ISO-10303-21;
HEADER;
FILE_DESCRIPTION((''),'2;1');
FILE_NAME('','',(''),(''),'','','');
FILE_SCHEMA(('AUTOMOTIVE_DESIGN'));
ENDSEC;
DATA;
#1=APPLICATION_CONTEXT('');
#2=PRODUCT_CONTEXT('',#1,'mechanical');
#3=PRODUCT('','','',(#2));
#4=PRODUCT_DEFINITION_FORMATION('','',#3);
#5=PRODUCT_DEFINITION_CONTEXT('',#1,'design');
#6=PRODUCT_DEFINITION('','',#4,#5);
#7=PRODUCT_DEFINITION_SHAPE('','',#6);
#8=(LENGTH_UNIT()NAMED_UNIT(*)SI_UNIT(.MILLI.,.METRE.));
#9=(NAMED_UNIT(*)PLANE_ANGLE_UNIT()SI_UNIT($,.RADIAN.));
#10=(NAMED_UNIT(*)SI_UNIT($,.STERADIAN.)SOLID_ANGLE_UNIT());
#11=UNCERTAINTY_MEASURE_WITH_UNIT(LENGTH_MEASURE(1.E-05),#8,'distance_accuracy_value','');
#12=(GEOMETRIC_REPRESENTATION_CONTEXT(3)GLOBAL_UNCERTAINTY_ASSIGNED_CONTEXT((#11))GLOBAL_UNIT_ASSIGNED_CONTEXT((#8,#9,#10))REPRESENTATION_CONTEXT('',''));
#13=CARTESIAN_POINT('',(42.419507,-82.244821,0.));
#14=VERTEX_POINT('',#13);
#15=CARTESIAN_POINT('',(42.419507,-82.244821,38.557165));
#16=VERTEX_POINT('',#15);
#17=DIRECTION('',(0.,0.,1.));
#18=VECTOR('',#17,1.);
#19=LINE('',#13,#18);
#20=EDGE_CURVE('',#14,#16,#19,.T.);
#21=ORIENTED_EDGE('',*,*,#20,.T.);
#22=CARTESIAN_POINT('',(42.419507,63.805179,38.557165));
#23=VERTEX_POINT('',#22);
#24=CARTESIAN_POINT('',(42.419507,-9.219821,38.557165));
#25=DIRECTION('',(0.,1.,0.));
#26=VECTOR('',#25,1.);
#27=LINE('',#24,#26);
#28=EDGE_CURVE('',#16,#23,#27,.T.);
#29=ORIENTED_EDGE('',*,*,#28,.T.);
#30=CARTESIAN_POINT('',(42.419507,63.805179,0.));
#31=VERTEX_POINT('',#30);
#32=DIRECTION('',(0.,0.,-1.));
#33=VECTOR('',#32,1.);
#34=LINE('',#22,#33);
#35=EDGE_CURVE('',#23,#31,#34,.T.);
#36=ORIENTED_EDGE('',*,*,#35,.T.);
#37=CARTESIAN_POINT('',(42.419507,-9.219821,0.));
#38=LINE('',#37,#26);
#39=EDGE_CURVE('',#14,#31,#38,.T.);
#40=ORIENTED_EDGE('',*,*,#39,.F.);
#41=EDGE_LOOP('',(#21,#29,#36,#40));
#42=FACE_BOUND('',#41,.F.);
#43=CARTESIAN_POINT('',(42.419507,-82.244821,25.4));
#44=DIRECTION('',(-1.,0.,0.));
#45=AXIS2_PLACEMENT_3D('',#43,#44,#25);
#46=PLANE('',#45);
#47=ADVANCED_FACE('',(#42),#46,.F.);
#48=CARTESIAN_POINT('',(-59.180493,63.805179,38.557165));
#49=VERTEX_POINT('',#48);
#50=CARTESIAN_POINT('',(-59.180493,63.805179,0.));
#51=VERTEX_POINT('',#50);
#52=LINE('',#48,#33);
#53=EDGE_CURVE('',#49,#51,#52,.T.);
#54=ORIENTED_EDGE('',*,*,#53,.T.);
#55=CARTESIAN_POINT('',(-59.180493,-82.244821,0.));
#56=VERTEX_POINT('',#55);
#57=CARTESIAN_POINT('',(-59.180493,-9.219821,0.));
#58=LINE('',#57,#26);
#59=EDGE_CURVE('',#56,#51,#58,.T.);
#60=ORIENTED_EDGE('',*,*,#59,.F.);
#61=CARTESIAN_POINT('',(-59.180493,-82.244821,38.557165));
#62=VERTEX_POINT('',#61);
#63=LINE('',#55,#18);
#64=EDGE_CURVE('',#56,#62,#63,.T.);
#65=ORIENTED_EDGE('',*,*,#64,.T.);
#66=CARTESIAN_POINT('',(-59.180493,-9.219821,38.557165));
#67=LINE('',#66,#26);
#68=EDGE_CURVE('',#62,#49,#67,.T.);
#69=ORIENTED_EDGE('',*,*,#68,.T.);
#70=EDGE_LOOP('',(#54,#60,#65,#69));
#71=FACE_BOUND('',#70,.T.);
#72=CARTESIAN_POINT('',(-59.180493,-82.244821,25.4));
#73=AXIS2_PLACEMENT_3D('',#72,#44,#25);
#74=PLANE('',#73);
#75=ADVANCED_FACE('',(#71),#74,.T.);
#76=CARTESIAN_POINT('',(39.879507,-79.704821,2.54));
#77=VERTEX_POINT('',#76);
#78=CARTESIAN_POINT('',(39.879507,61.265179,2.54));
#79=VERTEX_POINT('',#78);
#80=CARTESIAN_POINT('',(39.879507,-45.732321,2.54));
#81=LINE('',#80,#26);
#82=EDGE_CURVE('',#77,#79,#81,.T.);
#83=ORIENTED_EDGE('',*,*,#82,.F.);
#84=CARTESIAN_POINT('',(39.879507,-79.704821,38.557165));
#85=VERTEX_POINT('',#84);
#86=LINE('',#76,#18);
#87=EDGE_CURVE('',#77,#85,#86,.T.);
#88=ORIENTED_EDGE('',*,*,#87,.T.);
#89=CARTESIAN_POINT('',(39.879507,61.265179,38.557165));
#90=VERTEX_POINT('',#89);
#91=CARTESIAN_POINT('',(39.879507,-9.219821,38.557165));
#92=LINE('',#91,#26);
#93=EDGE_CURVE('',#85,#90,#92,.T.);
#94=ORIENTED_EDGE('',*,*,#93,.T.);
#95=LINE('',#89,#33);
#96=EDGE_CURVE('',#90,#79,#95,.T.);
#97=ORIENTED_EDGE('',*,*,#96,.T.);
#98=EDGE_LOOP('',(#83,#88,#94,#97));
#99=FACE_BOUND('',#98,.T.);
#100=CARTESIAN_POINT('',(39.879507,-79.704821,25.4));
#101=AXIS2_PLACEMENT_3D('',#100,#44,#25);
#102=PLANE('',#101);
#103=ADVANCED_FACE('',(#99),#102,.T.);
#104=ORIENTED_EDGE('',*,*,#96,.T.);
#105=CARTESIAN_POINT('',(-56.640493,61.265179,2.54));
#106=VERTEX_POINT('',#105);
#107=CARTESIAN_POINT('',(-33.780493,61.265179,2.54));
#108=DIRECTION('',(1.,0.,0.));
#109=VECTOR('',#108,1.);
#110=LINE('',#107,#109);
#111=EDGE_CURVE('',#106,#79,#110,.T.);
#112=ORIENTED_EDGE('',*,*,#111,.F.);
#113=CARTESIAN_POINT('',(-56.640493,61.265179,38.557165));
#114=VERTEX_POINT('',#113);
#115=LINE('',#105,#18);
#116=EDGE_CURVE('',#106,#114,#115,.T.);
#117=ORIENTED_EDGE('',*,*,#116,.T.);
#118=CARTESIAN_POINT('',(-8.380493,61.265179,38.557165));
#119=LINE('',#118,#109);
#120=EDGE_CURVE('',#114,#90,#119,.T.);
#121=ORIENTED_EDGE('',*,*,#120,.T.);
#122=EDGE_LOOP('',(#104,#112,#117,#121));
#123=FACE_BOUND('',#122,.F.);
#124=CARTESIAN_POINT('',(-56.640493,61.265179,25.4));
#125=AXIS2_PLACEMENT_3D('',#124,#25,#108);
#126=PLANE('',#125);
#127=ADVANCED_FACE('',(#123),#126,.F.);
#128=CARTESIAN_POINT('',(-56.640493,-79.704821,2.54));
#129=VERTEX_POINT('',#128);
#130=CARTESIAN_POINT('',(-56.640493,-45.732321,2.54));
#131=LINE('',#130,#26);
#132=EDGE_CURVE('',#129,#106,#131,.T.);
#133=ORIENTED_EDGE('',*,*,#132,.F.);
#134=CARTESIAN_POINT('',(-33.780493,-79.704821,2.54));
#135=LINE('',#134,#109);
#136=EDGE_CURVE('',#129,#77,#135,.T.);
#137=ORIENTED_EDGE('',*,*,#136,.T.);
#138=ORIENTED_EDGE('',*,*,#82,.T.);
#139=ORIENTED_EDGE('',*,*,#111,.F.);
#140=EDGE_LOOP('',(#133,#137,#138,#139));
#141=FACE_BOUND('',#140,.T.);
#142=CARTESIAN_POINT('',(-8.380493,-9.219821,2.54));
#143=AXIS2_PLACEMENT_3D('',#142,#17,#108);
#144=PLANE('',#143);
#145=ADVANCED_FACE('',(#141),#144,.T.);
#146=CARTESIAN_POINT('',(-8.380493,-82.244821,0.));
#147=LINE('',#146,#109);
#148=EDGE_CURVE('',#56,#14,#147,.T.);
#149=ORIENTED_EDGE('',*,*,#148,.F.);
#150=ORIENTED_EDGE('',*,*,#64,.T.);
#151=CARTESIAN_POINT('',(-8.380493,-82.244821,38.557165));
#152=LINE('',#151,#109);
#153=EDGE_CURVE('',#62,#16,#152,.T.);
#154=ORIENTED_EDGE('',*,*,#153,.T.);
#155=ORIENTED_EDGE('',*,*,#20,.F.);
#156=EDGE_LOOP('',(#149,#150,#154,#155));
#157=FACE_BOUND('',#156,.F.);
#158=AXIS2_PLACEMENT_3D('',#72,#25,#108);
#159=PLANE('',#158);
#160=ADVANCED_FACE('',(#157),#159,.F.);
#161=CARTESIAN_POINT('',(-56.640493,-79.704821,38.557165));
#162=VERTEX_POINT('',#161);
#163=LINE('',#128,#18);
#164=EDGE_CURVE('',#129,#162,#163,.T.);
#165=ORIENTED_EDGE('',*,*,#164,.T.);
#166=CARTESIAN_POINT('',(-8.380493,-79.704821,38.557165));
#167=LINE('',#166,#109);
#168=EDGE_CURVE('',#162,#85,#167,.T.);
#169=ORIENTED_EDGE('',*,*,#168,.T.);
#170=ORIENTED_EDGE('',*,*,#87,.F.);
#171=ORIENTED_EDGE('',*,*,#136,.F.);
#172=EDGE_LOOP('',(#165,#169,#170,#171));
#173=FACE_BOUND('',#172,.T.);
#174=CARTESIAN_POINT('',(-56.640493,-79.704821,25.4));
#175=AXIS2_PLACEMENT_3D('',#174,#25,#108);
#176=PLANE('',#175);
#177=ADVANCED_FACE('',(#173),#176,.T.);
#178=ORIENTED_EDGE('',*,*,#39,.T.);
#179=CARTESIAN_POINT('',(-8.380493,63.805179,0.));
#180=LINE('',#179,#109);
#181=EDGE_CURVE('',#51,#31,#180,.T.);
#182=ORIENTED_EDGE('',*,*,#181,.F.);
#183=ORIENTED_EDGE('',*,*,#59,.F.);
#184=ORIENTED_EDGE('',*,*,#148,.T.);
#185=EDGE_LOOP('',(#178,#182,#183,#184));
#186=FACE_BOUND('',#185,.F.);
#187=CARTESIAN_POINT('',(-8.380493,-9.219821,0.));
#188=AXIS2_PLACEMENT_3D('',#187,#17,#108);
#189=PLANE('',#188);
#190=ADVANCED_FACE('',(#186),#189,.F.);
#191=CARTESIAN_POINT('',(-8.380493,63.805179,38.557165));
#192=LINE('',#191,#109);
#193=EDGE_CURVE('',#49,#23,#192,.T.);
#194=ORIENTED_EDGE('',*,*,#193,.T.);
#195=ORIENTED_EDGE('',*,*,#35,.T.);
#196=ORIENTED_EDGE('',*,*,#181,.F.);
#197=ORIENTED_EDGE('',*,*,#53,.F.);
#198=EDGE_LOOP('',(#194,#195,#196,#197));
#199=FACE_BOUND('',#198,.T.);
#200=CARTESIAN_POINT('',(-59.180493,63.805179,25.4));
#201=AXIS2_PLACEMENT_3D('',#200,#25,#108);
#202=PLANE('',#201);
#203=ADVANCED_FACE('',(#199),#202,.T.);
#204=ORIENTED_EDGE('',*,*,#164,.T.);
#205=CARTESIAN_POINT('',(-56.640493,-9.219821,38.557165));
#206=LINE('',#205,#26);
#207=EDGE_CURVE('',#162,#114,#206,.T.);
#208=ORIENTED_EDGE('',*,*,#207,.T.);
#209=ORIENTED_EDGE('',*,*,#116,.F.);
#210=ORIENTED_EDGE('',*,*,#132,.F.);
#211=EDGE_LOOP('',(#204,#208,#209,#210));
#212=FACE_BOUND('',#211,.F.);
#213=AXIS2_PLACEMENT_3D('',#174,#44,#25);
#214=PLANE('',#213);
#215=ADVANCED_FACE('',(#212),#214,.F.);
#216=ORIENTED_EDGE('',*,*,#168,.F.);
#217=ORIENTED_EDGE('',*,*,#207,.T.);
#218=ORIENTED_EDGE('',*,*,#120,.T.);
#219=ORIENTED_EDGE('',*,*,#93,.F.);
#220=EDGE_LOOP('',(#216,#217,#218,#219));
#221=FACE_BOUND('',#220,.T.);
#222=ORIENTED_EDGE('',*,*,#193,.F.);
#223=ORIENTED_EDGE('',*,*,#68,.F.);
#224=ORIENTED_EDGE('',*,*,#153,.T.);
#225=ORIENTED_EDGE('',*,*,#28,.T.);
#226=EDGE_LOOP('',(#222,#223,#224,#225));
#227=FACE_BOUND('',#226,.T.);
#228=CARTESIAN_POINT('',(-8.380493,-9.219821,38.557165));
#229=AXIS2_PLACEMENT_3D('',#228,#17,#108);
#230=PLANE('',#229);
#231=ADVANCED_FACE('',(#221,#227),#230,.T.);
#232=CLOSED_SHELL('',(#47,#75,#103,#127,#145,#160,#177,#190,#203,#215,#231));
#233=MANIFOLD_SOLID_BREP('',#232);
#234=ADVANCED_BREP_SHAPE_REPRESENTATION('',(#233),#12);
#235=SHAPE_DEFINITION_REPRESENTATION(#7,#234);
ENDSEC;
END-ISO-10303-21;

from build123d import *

# Parameters (mm, degrees)
F0_W     = 101.6
F0_H     = 146.05
F1_DEPTH = 25.4
F2_T     = -2.54
F3_DEPTH = 13.157164678


with BuildPart() as f1:
    # F0 (on Top) → F1 (new body)
    with BuildSketch(Plane.XY):
        with Locations((-8.3804931492, -9.2198206152)):
            Rectangle(F0_W, F0_H)
    extrude(amount=F1_DEPTH)

    # F2
    f2_openings = [f1.faces().sort_by_distance(p)[0] for p in [
        (-8.380493, -9.219821, 25.4),
    ]]
    offset(amount=F2_T, openings=f2_openings)

    # F3 (add): a face of the model
    f3_faces = [f1.faces().sort_by_distance(p)[0] for p in [
        (40.6403732836, -9.2198206152, 25.4),
    ]]
    extrude(f3_faces, amount=F3_DEPTH)


solid = f1.part
